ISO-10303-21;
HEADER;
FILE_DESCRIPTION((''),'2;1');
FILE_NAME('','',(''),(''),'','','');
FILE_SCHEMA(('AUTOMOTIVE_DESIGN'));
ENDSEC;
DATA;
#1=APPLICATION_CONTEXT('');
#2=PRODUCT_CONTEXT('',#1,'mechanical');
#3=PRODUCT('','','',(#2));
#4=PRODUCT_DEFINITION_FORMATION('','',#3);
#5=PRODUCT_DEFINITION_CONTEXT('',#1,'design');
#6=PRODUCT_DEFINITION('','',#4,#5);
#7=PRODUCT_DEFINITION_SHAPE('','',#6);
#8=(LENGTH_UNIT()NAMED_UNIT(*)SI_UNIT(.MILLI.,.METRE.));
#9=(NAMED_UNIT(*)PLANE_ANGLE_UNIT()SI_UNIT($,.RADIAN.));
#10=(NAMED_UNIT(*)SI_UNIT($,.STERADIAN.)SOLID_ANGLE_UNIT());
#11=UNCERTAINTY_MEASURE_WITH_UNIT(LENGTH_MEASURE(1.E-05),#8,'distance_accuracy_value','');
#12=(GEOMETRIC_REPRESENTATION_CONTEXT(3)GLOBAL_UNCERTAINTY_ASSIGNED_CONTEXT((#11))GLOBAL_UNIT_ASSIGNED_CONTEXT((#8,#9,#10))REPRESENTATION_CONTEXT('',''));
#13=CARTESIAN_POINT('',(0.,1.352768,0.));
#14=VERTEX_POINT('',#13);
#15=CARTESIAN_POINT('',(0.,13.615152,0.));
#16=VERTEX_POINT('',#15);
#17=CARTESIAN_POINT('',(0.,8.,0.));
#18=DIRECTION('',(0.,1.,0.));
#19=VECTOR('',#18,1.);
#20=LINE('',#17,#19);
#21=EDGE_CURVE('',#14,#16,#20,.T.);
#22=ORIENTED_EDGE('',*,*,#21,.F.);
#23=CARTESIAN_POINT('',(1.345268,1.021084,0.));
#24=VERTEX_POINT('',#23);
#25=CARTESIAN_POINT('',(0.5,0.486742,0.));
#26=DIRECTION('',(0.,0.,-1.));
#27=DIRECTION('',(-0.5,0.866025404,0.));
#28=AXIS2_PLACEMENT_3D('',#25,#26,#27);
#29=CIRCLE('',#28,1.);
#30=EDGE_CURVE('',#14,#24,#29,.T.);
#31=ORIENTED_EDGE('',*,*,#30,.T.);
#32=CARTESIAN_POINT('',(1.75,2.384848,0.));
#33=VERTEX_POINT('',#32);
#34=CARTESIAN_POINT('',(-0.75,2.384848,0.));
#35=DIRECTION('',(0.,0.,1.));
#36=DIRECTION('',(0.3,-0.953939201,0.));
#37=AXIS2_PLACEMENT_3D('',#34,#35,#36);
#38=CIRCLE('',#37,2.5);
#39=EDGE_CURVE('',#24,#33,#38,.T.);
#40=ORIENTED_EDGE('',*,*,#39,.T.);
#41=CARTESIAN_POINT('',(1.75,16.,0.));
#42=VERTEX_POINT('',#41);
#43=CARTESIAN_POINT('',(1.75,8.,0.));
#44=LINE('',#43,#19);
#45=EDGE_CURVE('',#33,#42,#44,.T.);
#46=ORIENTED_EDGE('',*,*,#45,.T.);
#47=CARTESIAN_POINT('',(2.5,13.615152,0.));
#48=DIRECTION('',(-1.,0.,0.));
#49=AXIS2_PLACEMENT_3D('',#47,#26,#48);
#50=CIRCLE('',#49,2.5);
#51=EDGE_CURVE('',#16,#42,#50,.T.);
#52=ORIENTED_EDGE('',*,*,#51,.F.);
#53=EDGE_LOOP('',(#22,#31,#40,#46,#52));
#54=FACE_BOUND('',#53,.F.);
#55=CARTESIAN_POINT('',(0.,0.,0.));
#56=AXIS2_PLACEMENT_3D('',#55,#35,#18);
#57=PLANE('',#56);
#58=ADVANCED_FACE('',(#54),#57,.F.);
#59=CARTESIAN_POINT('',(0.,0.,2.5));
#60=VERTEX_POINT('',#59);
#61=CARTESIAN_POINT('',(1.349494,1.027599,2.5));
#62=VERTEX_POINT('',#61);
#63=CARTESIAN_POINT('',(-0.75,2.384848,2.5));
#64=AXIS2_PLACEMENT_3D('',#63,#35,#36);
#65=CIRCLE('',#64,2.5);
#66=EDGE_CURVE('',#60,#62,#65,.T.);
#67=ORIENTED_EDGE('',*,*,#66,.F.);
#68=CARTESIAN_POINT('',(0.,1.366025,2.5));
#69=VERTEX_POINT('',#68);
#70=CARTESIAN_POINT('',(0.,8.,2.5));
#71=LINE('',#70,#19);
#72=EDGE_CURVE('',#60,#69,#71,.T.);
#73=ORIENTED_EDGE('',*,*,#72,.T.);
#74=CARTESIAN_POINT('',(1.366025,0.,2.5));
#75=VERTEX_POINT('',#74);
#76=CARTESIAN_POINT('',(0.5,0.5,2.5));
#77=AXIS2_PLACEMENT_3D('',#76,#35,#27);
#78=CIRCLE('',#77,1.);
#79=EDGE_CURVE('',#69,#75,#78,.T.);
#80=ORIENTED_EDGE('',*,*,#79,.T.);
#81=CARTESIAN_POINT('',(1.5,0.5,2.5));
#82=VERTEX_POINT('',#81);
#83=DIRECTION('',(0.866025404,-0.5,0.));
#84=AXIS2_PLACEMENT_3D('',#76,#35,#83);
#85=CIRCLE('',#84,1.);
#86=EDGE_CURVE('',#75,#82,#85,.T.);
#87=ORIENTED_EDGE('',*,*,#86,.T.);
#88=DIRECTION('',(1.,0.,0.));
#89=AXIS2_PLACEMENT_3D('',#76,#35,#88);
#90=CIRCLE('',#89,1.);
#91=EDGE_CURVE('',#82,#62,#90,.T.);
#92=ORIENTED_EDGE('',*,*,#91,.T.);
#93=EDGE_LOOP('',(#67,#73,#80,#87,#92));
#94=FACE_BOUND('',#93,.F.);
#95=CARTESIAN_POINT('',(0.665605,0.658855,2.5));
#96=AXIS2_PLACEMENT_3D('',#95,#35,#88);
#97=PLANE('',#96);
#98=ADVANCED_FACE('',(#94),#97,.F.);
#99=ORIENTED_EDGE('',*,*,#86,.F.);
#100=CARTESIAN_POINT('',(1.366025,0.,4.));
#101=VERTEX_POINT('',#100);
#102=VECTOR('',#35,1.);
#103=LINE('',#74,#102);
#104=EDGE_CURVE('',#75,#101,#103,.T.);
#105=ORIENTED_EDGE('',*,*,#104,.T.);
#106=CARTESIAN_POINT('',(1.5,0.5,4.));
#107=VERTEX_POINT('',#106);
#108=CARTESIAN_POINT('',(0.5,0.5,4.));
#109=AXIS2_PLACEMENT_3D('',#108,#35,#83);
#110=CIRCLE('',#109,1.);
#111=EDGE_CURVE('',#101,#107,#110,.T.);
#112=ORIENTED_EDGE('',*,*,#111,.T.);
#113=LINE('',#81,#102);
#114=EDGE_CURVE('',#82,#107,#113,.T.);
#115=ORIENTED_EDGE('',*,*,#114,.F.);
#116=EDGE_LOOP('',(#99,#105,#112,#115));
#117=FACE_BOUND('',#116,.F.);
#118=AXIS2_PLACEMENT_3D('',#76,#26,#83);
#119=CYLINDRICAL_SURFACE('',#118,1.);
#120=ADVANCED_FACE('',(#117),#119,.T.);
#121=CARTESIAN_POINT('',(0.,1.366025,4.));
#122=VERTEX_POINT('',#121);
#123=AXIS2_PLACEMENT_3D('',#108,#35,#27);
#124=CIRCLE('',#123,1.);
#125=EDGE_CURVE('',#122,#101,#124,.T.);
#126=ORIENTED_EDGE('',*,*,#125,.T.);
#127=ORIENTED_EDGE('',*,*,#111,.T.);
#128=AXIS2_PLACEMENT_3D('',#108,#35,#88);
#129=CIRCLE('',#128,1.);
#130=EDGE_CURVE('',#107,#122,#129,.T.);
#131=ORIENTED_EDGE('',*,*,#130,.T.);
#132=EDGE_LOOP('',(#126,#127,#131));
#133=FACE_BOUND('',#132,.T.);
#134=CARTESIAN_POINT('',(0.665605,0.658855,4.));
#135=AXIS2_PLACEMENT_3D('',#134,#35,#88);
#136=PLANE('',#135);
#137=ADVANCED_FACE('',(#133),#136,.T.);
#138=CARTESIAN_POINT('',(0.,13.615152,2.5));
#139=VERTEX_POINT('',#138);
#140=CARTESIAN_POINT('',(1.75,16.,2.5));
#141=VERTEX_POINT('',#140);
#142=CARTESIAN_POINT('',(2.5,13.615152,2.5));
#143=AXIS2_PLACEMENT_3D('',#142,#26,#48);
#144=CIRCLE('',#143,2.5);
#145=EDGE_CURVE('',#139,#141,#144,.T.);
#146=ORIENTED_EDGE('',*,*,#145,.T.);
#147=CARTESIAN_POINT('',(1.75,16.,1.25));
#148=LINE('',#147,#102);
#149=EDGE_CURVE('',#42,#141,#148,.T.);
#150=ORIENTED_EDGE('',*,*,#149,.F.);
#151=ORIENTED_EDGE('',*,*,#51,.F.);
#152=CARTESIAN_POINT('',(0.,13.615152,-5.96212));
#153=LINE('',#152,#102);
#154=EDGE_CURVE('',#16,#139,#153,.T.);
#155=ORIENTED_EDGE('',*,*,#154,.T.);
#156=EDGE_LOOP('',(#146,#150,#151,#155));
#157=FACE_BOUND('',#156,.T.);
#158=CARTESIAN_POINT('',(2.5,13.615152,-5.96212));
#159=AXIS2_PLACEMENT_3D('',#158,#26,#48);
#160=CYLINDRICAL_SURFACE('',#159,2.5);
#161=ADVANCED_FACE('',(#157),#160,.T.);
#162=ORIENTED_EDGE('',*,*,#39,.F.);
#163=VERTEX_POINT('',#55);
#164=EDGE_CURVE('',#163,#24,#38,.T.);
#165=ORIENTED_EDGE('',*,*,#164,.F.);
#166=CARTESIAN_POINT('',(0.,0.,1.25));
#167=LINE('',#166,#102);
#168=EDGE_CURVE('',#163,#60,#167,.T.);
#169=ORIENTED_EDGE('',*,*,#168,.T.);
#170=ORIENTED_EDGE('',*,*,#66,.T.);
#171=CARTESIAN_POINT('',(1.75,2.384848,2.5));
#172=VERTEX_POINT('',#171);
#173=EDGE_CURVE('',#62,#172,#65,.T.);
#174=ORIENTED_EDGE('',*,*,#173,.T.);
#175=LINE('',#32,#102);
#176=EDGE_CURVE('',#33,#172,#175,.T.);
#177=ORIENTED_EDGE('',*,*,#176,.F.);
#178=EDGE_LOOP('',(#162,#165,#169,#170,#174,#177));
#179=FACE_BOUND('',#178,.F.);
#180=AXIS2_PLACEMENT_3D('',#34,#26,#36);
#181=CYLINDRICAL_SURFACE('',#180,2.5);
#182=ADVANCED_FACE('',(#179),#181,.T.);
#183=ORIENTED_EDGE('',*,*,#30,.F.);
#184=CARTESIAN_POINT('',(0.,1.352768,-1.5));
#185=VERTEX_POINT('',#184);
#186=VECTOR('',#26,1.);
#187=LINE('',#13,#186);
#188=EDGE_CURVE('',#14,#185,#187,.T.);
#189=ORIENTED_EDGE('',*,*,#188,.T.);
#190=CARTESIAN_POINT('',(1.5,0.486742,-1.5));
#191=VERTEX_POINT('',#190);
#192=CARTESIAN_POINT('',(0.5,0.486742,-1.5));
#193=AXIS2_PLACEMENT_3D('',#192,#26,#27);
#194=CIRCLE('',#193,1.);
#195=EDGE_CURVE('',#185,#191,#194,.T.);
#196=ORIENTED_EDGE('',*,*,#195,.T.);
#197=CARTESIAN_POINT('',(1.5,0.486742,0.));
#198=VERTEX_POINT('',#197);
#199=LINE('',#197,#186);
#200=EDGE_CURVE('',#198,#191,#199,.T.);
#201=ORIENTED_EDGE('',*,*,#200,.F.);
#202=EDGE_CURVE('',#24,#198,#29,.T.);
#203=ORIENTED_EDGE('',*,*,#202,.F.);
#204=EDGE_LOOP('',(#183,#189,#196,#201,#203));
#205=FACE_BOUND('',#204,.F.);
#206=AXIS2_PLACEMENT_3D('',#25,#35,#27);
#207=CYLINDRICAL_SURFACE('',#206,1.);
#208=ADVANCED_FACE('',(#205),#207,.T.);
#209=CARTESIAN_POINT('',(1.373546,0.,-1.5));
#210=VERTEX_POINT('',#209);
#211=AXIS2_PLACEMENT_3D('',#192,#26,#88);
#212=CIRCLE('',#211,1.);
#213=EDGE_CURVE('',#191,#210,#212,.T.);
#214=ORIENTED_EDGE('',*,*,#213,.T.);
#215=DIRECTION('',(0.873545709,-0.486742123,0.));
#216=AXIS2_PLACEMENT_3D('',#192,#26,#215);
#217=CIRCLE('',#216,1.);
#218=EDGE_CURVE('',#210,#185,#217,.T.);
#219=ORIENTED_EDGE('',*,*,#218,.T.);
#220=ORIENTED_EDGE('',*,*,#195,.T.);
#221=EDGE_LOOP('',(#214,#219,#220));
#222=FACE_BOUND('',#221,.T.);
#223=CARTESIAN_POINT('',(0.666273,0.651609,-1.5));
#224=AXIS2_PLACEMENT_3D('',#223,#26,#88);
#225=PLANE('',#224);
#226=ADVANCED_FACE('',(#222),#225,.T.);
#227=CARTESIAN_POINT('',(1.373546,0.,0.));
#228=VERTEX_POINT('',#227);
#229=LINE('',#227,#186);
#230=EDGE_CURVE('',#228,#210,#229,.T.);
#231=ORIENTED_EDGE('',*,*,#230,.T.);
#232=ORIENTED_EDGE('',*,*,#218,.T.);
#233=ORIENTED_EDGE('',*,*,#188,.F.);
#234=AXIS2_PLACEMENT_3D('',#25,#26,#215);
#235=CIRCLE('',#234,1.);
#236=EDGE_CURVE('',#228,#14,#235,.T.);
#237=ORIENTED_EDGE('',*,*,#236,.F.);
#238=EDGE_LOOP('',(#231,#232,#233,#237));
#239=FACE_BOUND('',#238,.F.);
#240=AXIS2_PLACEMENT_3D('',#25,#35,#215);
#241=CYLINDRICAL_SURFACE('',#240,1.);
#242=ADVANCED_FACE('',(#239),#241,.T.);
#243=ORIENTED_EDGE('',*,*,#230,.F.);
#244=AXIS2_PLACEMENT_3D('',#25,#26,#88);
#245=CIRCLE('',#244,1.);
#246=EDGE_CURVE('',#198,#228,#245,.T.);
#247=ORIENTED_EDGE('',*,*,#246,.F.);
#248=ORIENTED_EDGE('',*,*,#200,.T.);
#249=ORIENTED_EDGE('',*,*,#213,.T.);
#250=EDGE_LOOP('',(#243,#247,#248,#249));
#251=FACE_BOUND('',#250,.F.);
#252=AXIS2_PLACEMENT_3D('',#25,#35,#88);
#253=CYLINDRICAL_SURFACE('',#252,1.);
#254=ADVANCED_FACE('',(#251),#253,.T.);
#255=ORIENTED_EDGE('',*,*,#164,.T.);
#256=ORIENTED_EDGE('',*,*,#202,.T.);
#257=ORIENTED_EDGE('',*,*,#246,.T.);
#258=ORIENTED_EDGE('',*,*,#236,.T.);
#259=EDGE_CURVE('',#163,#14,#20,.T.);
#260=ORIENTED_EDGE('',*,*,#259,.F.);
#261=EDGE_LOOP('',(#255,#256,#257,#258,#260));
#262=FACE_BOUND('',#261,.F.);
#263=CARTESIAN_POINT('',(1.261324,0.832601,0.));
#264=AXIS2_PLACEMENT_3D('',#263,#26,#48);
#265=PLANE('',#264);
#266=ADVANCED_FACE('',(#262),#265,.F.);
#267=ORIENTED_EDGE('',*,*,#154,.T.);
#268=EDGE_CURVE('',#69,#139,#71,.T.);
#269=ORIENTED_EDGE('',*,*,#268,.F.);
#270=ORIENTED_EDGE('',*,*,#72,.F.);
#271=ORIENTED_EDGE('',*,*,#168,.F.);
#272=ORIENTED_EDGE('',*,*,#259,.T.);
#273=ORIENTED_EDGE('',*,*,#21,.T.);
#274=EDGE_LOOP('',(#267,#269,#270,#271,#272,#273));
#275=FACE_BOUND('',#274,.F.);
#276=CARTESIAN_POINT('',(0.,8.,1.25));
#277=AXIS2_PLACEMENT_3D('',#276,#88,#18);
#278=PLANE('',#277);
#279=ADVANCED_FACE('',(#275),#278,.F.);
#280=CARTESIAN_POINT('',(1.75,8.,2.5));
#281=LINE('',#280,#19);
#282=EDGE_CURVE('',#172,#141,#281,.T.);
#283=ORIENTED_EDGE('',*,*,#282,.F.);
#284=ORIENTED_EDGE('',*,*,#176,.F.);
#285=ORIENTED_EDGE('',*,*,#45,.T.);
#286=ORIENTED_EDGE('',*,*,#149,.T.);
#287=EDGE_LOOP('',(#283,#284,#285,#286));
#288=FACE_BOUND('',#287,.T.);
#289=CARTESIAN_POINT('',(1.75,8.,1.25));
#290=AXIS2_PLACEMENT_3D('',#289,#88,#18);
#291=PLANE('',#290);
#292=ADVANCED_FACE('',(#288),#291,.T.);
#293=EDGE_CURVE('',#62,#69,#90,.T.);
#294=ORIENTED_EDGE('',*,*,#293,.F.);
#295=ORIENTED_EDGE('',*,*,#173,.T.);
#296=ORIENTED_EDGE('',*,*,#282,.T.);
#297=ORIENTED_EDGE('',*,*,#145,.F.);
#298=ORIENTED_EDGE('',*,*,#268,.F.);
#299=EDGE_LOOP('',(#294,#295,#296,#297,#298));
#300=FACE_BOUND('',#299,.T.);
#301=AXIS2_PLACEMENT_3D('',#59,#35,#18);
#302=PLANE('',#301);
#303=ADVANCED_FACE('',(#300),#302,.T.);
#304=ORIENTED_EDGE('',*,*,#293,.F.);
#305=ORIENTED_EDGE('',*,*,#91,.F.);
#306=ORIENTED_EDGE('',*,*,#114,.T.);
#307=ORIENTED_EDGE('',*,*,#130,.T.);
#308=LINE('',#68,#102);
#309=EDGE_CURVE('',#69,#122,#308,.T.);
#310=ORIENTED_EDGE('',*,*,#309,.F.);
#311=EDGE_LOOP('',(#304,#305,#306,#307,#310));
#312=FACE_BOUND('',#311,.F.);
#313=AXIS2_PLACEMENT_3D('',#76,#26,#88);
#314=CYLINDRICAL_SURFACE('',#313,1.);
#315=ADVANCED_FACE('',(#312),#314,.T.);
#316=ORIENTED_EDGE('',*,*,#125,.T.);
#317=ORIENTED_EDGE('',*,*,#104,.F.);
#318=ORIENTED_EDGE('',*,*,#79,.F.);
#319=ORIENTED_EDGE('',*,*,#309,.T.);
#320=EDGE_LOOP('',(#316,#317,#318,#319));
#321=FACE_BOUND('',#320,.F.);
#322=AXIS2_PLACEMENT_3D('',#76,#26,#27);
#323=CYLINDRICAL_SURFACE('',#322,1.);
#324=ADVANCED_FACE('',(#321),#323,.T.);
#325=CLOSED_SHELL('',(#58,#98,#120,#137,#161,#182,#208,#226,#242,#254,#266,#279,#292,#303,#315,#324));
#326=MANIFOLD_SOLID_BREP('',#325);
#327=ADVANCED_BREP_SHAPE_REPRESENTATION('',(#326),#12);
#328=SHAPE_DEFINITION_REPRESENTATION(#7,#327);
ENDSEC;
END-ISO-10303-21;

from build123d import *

# Parameters (mm, degrees)
F0_W        = 16
F0_H        = 2.5
F1_DEPTH    = 1.75
F4_DEPTH    = 1.5
F5_DEPTH    = 1.5
F6_T1_DEPTH = 14.4242400177
F6_T3_DEPTH = 2.5


# Not quite as in the source:
# - a fillet or chamfer that OpenCascade refuses, or shapes differently, is made with other operations: its cross-section is extruded or revolved along the edge and cut away or added


with BuildPart() as f1:
    # F0 (on Right) → F1 (new body)
    with BuildSketch(Plane.YZ):
        with Locations((8, 1.25)):
            Rectangle(F0_W, F0_H)
    extrude(amount=F1_DEPTH)

    # F3 (on face) → F4 (join)
    with BuildSketch(Plane.XY.offset(2.5)):
        with BuildLine():
            ThreePointArc((1.3660254038, 0), (1.4659258263, 0.2411809549), (1.5, 0.5))
            ThreePointArc((1.5, 0.5), (1, 1.3660254038), (0, 1.3660254038))
            Line((0, 1.3660254038), (0, 0))
            Line((0, 0), (1.3660254038, 0))
        make_face()
        with BuildLine():
            Line((0, 0), (0, 1.3660254038))
            ThreePointArc((0, 1.3660254038), (-0.2071067812, -0.2071067812), (1.3660254038, 0))
            Line((1.3660254038, 0), (0, 0))
        make_face()
    extrude(amount=F4_DEPTH)

    # F2 (on face) → F5 (join)
    with BuildSketch(Plane(origin=(0, 0, 0), x_dir=(1, 0, 0), z_dir=(0, 0, -1))):
        with BuildLine():
            ThreePointArc((0, -1.3527675268), (1, -1.3527675268), (1.5, -0.486742123))
            ThreePointArc((1.5, -0.486742123), (1.4678702674, -0.2352920375), (1.373545709, 0))
            Line((1.373545709, 0), (0, 0))
            Line((0, 0), (0, -1.3527675268))
        make_face()
        with BuildLine():
            Line((0, 0), (1.373545709, 0))
            ThreePointArc((1.373545709, 0), (-0.2016972955, 0.2257330733), (0, -1.3527675268))
            Line((0, -1.3527675268), (0, 0))
        make_face()
    extrude(amount=F5_DEPTH)

    # F6: fillet of radius 2.5 on 2 edges, made by hand

    # F6_s2 → F6_t1 (cut)
    with BuildSketch(Plane.XY.offset(-5.9621200089)):
        with BuildLine():
            ThreePointArc((0, 13.6151519965), (0.4844355629, 15.0941719422), (1.75, 16))
            Line((1.75, 16), (0, 16))
            Line((0, 16), (0, 13.6151519965))
        make_face()
    extrude(amount=F6_T1_DEPTH, mode=Mode.SUBTRACT)

    # F6_s4 → F6_t3 (cut)
    with BuildSketch(Plane.XY):
        with BuildLine():
            ThreePointArc((0, 0), (1.2655644371, 0.9058280578), (1.75, 2.3848480035))
            Line((1.75, 2.3848480035), (1.75, 0))
            Line((1.75, 0), (0, 0))
        make_face()
    extrude(amount=F6_T3_DEPTH, mode=Mode.SUBTRACT)


solid = f1.part
